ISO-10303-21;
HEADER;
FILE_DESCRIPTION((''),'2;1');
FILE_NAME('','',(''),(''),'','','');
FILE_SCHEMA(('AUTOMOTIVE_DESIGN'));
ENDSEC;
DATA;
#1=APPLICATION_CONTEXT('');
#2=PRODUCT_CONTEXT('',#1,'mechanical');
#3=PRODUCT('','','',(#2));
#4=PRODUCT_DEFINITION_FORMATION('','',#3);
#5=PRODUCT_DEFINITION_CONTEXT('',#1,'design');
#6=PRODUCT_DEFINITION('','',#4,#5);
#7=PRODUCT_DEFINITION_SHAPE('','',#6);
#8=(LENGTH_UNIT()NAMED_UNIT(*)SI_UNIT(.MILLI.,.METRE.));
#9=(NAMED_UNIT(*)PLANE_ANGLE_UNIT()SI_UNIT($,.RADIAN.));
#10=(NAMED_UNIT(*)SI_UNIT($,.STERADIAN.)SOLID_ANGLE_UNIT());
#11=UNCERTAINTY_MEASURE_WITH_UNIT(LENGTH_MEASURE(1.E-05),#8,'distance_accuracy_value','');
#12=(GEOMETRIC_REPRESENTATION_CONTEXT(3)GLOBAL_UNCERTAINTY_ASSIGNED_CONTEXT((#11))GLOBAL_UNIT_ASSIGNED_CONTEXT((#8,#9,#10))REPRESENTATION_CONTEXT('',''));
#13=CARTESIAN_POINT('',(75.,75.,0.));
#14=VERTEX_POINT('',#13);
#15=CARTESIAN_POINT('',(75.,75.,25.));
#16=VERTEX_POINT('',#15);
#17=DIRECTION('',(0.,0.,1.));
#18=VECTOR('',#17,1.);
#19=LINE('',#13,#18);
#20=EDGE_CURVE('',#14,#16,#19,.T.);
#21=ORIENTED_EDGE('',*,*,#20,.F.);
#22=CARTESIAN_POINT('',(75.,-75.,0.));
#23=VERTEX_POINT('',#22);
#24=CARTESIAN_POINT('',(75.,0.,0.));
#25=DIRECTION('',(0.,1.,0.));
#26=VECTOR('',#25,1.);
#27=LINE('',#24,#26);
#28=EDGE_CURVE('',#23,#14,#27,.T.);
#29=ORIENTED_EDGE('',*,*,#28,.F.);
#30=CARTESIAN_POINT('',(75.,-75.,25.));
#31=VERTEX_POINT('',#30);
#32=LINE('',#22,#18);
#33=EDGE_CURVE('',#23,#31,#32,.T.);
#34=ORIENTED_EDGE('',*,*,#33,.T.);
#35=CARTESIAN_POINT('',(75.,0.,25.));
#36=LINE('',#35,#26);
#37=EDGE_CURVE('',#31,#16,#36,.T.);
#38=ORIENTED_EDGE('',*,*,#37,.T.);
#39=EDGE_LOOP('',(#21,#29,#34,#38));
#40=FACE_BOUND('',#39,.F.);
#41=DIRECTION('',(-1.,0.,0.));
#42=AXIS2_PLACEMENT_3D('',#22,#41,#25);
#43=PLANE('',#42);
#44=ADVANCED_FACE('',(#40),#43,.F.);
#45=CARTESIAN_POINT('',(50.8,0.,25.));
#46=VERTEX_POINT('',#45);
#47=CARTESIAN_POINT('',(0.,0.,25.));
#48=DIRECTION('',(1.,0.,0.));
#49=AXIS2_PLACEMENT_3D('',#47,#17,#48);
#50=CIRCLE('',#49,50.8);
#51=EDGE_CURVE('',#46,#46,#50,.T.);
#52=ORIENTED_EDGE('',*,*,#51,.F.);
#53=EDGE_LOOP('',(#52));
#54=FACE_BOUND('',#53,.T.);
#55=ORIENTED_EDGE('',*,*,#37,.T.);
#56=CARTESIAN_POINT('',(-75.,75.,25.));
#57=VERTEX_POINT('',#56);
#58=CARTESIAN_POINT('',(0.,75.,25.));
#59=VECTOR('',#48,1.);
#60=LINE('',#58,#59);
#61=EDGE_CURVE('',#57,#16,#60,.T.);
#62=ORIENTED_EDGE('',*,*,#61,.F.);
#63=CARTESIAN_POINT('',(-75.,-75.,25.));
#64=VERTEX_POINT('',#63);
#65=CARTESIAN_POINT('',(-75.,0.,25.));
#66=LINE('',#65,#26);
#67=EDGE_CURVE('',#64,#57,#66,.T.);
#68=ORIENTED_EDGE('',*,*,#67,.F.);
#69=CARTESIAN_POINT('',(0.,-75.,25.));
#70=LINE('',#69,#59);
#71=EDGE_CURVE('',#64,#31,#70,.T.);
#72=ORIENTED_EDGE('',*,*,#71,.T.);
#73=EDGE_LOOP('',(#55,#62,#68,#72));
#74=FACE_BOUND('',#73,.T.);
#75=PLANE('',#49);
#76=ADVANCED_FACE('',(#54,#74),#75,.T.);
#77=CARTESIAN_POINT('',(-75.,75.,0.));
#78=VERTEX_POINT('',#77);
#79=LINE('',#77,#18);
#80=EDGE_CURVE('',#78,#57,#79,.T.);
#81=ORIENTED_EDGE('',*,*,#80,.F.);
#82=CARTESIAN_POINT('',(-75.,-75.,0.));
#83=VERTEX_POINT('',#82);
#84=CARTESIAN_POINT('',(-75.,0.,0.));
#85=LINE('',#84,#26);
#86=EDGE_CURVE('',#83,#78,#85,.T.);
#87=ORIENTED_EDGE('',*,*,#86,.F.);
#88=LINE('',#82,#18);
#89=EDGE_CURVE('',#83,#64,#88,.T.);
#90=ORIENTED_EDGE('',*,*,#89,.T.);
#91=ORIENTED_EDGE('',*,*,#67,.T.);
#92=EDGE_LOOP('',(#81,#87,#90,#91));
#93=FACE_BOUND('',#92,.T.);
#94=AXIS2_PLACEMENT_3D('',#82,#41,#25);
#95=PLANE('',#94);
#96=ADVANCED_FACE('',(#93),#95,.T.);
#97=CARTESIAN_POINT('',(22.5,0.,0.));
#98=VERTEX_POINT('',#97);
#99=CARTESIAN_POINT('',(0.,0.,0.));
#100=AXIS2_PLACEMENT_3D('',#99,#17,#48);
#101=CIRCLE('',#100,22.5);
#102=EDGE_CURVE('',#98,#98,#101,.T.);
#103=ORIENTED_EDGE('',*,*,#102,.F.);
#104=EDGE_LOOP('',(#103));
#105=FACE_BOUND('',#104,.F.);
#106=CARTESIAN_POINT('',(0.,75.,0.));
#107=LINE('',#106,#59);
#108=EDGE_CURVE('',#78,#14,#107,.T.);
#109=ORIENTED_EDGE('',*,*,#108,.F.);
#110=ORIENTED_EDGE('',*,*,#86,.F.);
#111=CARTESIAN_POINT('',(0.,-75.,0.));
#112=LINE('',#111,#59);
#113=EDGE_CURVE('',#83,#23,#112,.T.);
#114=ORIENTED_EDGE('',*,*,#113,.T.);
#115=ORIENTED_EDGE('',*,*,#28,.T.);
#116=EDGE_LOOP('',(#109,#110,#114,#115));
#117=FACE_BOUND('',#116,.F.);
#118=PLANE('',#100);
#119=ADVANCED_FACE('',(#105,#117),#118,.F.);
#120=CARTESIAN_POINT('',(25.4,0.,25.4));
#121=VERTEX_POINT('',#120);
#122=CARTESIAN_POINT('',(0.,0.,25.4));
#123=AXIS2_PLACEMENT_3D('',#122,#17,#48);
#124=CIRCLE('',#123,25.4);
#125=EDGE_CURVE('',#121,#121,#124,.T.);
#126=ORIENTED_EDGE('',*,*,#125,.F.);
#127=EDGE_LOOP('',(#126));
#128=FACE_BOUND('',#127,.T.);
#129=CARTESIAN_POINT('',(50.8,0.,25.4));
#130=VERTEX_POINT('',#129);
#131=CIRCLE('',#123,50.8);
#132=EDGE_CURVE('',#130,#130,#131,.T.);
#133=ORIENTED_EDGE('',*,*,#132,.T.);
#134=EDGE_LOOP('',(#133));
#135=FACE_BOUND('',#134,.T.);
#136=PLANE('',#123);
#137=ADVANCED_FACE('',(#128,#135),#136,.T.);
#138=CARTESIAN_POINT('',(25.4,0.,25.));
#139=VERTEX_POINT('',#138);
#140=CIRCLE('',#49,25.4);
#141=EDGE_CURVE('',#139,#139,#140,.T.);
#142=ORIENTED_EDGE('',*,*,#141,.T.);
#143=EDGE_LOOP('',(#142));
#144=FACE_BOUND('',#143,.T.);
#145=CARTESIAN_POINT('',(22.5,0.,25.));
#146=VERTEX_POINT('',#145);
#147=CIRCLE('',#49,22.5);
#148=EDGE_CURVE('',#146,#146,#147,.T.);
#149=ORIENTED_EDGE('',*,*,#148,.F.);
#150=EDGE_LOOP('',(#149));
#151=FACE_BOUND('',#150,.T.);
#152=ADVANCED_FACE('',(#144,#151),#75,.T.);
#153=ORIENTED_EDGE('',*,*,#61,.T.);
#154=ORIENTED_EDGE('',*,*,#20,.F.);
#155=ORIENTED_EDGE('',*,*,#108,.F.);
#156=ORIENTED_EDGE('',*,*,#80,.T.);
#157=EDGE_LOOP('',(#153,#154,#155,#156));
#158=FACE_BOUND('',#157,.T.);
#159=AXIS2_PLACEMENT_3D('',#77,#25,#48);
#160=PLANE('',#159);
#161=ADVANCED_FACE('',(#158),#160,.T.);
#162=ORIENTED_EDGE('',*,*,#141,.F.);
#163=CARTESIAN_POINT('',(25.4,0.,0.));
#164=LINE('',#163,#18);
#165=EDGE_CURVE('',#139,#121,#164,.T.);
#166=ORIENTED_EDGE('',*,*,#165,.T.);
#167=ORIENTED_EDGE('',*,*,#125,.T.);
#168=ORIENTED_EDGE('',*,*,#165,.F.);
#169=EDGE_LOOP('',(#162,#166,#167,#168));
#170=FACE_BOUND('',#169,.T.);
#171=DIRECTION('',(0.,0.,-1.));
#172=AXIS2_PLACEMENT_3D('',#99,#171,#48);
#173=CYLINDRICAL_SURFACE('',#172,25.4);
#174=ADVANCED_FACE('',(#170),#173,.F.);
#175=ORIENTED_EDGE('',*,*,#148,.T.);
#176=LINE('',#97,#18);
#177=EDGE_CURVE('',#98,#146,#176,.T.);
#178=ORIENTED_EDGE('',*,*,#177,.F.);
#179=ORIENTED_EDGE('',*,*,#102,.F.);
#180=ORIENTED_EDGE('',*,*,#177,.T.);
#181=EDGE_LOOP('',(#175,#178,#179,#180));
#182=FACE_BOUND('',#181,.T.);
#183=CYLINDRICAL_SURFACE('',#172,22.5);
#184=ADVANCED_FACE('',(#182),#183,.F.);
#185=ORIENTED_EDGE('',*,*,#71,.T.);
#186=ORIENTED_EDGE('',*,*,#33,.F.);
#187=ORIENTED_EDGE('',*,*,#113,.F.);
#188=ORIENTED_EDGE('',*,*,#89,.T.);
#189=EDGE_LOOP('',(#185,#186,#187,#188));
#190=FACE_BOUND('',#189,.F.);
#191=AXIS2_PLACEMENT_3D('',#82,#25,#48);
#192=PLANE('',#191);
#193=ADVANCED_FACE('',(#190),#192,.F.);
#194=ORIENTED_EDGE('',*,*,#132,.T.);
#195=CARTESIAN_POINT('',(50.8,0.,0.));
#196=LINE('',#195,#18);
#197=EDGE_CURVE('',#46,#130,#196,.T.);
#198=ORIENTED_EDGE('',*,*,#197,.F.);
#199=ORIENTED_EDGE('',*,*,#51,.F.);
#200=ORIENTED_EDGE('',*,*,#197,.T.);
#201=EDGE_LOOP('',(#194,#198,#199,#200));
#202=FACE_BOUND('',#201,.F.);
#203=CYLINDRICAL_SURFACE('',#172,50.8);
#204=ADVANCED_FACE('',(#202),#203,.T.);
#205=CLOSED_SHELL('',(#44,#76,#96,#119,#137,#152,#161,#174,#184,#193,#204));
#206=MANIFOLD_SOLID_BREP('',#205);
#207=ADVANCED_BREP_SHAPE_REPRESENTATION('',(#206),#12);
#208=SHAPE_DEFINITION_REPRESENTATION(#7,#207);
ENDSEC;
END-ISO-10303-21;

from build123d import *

# Parameters (mm, degrees)
F0_R     = 50.8
F0_R_2   = 25.4
F1_DEPTH = 25.4
F2_W     = 150
F2_H     = 150
F2_R     = 50.8
F3_DEPTH = 25
F4_R     = 25.4
F4_R_2   = 22.5
F5_DEPTH = 25


# Not quite as in the source:
# - the program builds the solid bodies; features that only make, move or delete a surface that nothing else refers to are left out


with BuildPart() as f1:
    # F0 (on Top) → F1 (new body)
    with BuildSketch(Plane.XY):
        Circle(F0_R)
        Circle(F0_R_2, mode=Mode.SUBTRACT)
    extrude(amount=F1_DEPTH)

    # F2 (on Top) → F3 (join)
    with BuildSketch(Plane.XY):
        Rectangle(F2_W, F2_H)
        Circle(F2_R, mode=Mode.SUBTRACT)
    extrude(amount=F3_DEPTH)

    # F4 (on Top) → F5 (join)
    with BuildSketch(Plane.XY):
        Circle(F4_R)
        Circle(F4_R_2, mode=Mode.SUBTRACT)
    extrude(amount=F5_DEPTH)


solid = f1.part
